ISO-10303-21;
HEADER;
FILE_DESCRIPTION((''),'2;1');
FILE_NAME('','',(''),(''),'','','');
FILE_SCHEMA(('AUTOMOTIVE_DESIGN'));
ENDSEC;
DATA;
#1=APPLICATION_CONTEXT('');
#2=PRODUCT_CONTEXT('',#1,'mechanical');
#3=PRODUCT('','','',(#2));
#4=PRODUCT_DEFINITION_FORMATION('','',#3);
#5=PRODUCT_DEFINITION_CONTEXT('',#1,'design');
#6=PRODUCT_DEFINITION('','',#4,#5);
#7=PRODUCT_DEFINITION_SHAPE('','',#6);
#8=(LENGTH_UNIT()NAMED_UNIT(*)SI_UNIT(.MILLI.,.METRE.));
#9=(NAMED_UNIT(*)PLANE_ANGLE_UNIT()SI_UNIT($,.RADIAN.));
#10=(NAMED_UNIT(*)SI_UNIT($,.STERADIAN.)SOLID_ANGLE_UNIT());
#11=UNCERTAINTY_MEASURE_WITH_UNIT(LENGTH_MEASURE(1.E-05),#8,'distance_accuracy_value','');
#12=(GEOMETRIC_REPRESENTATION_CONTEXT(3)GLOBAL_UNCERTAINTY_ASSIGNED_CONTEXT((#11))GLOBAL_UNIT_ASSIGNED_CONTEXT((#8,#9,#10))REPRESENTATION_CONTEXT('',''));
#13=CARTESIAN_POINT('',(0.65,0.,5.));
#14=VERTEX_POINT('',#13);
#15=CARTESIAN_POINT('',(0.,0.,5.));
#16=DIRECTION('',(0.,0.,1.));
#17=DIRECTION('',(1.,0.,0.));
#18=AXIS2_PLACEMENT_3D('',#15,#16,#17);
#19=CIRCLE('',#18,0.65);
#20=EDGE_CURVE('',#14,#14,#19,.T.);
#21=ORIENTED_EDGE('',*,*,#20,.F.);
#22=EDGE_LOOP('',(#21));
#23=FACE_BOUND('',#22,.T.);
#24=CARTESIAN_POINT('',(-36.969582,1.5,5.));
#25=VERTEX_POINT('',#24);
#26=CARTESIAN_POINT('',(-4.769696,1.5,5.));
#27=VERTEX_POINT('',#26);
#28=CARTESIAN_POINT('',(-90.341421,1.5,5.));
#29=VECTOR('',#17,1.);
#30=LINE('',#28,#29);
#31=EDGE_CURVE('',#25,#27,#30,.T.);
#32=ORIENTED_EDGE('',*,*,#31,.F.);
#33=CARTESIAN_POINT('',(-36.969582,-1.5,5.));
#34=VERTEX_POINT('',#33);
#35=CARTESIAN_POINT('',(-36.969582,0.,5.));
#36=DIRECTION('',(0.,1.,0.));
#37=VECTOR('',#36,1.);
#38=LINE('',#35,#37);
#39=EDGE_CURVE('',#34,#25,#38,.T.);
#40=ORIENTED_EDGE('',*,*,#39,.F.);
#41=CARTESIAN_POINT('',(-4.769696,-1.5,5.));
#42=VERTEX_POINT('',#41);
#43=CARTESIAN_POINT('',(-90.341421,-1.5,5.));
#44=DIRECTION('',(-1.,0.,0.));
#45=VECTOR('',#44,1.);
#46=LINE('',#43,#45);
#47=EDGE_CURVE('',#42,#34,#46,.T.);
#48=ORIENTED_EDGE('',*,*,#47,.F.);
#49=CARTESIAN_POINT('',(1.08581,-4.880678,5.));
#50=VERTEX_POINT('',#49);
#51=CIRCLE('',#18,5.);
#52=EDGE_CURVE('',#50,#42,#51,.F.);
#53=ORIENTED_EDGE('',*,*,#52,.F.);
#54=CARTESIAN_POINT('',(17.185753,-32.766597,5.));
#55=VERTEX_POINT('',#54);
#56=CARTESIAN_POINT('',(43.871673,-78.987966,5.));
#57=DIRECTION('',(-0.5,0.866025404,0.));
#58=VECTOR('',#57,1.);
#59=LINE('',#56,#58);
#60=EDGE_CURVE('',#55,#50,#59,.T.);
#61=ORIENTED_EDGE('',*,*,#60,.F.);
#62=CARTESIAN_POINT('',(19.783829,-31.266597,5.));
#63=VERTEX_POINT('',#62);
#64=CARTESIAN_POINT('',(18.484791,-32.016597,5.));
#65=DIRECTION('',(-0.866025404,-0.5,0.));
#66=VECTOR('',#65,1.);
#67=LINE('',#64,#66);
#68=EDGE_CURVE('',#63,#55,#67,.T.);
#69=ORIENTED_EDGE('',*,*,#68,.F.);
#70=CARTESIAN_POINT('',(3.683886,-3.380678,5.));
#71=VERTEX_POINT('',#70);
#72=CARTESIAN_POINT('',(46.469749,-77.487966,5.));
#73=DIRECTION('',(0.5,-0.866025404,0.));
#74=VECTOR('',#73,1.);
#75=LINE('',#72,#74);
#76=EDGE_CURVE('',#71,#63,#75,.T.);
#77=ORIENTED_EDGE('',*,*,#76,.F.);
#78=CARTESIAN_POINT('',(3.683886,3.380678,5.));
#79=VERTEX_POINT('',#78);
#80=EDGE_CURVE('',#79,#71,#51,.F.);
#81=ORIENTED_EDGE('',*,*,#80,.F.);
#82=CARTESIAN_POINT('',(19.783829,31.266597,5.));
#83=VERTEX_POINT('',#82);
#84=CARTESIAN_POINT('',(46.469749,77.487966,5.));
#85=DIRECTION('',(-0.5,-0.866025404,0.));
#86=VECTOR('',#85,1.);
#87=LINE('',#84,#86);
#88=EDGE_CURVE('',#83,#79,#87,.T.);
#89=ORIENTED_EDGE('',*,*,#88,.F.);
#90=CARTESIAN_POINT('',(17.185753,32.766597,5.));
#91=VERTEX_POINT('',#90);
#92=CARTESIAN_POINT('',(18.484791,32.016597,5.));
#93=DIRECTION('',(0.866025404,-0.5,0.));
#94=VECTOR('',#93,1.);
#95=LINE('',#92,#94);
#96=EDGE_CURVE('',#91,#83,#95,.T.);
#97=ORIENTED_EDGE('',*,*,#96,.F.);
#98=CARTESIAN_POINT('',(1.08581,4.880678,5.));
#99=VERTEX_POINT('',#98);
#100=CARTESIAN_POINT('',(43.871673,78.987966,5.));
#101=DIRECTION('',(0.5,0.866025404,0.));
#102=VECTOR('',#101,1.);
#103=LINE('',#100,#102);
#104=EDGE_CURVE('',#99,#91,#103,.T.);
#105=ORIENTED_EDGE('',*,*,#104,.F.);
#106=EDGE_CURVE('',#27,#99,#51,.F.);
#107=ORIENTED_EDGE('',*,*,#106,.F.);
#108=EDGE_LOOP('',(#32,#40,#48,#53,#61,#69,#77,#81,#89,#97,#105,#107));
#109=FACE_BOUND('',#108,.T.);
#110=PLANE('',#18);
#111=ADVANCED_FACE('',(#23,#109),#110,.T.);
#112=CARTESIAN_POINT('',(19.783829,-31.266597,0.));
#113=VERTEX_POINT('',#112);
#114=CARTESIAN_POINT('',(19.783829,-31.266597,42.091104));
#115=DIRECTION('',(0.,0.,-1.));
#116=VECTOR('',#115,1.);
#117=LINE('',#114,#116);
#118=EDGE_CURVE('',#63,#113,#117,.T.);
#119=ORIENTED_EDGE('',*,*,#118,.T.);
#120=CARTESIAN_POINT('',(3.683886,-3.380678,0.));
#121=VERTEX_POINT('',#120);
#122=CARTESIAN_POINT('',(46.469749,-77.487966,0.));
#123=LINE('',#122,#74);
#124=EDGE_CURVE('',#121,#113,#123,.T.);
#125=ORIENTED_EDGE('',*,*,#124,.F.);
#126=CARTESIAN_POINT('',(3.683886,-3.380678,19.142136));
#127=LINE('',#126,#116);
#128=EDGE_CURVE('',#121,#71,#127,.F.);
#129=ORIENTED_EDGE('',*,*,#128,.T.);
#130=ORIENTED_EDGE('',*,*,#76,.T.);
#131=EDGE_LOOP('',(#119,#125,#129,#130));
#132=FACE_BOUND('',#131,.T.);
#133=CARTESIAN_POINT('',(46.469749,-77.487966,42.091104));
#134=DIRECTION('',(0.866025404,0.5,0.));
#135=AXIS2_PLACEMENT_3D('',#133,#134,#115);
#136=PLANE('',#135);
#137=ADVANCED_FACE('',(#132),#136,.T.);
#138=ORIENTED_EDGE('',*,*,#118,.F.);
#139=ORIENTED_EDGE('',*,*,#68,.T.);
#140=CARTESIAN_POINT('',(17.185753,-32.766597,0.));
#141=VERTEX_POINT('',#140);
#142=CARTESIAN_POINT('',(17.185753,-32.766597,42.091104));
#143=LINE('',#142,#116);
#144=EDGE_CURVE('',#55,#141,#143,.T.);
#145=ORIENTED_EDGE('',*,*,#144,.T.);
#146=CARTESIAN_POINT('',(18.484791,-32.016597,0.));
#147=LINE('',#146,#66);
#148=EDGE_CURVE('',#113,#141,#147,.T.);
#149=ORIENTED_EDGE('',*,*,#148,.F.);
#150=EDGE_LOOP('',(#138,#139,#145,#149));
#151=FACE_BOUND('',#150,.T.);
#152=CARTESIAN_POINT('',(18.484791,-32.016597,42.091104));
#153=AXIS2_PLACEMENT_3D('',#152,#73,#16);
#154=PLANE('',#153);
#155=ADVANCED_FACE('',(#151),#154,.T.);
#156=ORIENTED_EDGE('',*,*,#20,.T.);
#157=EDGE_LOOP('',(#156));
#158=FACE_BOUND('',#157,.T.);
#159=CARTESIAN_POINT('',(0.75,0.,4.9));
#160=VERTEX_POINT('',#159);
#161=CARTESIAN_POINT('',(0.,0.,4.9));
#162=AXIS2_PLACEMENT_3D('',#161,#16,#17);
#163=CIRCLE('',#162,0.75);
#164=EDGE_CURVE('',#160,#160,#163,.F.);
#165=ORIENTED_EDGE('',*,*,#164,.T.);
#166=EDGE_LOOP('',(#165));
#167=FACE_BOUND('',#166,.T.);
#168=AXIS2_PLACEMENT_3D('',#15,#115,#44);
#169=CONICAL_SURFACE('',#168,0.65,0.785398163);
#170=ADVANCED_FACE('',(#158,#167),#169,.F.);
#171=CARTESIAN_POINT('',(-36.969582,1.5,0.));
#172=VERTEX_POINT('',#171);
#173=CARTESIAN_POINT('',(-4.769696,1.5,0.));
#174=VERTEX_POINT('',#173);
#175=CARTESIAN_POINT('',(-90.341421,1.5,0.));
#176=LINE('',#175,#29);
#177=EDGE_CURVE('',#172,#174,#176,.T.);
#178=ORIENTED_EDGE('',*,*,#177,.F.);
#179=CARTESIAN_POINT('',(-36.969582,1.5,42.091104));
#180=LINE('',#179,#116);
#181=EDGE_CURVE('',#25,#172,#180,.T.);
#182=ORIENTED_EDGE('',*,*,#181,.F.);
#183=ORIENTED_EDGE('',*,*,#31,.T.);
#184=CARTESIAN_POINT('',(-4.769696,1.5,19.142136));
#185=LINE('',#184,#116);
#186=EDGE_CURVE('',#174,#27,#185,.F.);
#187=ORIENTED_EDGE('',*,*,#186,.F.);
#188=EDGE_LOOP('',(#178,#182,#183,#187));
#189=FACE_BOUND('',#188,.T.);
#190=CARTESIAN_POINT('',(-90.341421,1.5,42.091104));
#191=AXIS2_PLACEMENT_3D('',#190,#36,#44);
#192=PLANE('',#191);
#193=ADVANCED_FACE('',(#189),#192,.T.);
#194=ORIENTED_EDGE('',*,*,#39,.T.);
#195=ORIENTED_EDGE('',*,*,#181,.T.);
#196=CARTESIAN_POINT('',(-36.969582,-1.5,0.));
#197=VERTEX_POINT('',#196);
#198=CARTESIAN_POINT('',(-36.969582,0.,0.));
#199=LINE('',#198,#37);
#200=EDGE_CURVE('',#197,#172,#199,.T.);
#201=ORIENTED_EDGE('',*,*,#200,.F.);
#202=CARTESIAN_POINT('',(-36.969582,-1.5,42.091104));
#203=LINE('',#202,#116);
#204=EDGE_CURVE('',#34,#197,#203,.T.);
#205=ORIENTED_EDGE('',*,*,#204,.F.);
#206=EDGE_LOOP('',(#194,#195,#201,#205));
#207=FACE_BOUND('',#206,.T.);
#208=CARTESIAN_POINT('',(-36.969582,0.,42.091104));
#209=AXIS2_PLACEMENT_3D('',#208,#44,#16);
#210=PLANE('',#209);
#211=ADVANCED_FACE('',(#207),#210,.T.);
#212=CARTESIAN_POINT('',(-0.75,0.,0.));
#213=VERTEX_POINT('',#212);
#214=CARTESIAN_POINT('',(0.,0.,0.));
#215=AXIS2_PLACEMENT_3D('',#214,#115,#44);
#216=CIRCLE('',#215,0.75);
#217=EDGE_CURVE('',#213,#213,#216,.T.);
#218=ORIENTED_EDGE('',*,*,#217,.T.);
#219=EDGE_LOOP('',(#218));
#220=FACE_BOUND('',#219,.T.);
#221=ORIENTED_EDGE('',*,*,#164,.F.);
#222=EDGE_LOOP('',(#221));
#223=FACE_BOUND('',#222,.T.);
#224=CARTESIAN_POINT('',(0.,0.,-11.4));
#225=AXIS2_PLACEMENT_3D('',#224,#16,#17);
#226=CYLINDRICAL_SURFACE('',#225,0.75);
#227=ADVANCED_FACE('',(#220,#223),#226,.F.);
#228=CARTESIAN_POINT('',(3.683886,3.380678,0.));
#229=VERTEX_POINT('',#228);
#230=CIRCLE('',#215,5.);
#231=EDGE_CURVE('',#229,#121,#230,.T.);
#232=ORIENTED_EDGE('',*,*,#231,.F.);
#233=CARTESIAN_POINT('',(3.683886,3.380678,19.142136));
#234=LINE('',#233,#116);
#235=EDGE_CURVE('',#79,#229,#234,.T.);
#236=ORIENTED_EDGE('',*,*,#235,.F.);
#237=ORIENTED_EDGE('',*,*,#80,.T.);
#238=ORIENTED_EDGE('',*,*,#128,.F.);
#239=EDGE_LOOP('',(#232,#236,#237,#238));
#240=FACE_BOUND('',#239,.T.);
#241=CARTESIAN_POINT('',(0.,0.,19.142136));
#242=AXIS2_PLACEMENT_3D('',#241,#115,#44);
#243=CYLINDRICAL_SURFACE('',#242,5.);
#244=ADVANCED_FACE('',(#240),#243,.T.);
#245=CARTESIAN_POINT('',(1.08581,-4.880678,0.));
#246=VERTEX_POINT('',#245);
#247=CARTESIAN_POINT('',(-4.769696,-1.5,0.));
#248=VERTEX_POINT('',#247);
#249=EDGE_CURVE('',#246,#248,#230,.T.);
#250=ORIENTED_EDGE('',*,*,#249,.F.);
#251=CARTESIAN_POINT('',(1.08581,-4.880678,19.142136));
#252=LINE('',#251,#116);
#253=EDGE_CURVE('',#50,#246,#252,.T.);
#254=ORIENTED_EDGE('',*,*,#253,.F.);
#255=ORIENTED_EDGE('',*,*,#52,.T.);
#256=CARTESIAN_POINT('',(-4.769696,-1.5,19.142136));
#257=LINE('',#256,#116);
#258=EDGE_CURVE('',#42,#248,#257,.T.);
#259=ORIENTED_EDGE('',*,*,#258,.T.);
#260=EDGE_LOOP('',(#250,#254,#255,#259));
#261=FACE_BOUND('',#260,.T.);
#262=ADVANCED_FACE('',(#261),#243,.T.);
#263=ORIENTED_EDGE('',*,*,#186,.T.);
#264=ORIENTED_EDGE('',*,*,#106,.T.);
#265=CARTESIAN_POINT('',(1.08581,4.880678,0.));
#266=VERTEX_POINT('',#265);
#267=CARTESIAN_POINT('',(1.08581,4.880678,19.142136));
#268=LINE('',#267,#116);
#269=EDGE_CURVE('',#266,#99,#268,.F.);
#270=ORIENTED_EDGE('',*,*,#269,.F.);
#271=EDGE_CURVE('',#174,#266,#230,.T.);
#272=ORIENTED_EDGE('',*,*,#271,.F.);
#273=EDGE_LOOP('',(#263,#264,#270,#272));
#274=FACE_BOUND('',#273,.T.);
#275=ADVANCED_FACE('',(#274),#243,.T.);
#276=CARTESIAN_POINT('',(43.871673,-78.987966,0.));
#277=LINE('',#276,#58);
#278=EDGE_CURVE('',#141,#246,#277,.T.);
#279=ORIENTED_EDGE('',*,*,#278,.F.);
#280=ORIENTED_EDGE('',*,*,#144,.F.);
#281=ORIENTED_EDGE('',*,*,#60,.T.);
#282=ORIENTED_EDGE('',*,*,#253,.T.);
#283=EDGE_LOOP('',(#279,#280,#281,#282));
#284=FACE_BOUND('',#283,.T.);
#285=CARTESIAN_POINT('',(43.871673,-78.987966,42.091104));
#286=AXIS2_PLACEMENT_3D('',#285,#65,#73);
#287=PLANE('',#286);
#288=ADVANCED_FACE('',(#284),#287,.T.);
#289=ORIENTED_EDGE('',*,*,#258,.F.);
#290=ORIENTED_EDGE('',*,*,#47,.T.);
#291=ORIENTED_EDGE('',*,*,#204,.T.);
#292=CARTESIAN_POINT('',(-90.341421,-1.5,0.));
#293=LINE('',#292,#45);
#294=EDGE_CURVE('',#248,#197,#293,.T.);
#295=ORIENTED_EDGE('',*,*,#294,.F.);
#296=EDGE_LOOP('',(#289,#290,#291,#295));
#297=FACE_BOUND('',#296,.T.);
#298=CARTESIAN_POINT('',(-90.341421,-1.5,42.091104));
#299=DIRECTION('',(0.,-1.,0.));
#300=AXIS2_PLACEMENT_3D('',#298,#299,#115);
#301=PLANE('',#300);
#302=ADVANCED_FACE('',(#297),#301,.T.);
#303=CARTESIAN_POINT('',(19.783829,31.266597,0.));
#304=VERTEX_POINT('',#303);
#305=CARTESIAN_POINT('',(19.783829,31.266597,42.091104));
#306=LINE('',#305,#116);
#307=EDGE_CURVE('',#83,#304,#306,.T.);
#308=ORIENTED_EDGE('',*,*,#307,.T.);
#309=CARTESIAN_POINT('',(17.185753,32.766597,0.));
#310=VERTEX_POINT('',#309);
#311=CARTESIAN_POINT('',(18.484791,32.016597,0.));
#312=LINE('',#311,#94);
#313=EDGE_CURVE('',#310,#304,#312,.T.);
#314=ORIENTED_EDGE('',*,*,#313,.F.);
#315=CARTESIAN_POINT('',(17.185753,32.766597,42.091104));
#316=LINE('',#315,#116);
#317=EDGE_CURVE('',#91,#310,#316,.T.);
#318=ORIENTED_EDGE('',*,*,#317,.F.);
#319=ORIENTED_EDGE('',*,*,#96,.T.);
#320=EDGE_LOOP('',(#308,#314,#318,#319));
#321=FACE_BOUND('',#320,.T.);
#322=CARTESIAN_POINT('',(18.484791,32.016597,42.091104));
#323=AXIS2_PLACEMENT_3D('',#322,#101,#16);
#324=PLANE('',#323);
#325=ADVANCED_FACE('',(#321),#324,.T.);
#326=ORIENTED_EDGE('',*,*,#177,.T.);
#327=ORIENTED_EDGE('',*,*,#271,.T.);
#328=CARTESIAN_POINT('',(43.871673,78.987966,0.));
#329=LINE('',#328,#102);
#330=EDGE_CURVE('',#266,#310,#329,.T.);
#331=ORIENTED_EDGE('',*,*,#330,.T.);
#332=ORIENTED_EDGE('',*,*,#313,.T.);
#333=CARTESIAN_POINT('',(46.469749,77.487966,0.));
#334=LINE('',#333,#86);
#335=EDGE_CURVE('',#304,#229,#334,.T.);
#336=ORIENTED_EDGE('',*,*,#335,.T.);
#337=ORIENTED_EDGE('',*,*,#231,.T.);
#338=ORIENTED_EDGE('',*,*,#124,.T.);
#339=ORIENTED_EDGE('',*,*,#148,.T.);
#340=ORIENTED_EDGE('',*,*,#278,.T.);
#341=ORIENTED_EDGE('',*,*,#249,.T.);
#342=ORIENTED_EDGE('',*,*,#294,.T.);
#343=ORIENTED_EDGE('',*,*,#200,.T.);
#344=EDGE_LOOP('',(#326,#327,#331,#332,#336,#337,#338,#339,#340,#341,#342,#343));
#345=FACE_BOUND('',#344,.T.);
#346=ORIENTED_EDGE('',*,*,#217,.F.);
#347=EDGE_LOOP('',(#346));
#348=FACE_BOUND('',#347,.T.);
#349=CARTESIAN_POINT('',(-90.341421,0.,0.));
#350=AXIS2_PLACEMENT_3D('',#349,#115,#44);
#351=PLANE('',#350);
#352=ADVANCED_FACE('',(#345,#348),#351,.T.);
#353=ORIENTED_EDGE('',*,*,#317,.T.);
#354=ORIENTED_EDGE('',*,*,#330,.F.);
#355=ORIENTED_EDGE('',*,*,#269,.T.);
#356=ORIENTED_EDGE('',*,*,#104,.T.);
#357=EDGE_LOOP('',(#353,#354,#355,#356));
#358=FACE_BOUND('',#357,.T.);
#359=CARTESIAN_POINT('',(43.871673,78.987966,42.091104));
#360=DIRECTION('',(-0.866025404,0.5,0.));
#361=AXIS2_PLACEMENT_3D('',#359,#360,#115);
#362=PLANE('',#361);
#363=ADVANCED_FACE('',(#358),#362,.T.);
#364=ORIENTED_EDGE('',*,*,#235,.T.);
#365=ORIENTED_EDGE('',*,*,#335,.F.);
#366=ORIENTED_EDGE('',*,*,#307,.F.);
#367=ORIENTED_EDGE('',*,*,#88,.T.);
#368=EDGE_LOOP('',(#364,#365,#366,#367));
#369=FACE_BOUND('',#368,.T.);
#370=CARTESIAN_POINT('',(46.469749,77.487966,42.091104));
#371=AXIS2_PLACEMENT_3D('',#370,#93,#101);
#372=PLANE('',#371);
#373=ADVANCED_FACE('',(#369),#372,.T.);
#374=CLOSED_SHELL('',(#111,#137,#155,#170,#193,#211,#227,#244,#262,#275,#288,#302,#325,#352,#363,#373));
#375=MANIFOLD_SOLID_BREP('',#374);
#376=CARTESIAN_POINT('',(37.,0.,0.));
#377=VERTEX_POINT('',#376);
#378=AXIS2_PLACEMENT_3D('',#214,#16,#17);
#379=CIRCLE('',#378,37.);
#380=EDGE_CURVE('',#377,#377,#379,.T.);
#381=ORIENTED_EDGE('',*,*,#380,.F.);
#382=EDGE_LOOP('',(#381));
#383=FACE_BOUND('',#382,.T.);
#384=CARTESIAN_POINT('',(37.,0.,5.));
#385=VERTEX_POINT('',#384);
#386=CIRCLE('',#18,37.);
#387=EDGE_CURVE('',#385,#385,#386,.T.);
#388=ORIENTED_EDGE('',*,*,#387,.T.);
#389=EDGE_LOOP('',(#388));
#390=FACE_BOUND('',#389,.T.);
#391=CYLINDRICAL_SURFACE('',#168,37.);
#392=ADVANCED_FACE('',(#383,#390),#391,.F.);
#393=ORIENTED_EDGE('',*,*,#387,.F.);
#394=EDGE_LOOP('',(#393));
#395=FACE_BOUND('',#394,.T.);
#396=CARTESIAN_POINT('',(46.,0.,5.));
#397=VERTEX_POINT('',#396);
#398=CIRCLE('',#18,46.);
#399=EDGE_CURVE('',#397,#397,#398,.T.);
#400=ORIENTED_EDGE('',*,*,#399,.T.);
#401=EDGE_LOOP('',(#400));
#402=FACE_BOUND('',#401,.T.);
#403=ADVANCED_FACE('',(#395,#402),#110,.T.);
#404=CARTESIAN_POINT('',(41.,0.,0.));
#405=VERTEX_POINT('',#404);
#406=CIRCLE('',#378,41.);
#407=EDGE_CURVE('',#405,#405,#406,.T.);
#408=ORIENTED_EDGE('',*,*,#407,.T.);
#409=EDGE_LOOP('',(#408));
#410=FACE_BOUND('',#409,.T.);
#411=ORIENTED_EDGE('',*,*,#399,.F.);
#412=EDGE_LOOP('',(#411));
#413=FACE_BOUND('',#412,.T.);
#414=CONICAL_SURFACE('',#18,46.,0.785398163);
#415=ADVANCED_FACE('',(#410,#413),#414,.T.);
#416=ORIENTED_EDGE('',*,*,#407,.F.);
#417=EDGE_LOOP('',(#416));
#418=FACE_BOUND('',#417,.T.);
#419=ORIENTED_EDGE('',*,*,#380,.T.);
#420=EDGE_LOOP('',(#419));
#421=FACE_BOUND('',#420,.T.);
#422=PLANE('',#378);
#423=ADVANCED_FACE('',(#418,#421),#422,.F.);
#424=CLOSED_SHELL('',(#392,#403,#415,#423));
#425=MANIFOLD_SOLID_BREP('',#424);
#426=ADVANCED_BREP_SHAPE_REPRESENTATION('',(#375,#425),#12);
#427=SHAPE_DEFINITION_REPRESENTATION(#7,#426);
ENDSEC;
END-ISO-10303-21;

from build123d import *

# Parameters (mm, degrees)
SKETCH1_R           = 46
SKETCH1_R_2         = 37
BOSS_EXTRUDE1_DEPTH = 5
SKETCH7_W           = 36.969582091
SKETCH7_H           = 1.5
BOSS_EXTRUDE4_DEPTH = 5
CIRPATTERN4_COUNT   = 3
SKETCH8_R           = 5
BOSS_EXTRUDE5_DEPTH = 5


# Read off the part's stored shape, not the designer's step: Cavity1
with BuildPart() as part:
    # Sketch1 → Boss-Extrude1 (new body)
    with BuildSketch(Plane.XY):
        Circle(SKETCH1_R)
        Circle(SKETCH1_R_2, mode=Mode.SUBTRACT)
    extrude(amount=BOSS_EXTRUDE1_DEPTH)

    # Sketch6 → Cut-Revolve2 (revolve, cut)
    with BuildSketch(Plane(origin=(0, 0, 0), x_dir=(1, 0, 0), z_dir=(0, 1, 0)), mode=Mode.PRIVATE) as cut_revolve2_sk:
        Polygon((-46, 0), (-41, 0), (-46, -5), align=None)
    revolve(cut_revolve2_sk.sketch.rotate(Axis((0, 0, 0), (0, 0, -1)), 180), axis=Axis((0, 0, 0), (0, 0, -1)), mode=Mode.SUBTRACT)


with BuildPart() as body_2:
    # Sketch7 → Boss-Extrude4 (new body)
    with BuildSketch(Plane(origin=(0, 0, 0), x_dir=(-1, 0, 0), z_dir=(0, 0, -1))):
        with Locations((18.484791045, 0.75)):
            Rectangle(SKETCH7_W, SKETCH7_H)
        with Locations((18.484791045, -0.75)):
            Rectangle(SKETCH7_W, SKETCH7_H)
    extrude(amount=-BOSS_EXTRUDE4_DEPTH)


with BuildPart() as cirpattern4_1:
    # CirPattern4: pattern copy
    add(body_2.part.rotate(Axis((0, 0, 0), (0, 0, 1)), 1 * 360 / CIRPATTERN4_COUNT))


with BuildPart() as cirpattern4_2:
    # CirPattern4: pattern copy
    add(body_2.part.rotate(Axis((0, 0, 0), (0, 0, 1)), 2 * 360 / CIRPATTERN4_COUNT))


with BuildPart() as body_2_1:
    add(body_2.part)

    add(cirpattern4_1.part)  # Boss-Extrude5 merges CirPattern4_1

    add(cirpattern4_2.part)  # Boss-Extrude5 merges CirPattern4_2
    # Sketch8 → Boss-Extrude5 (add)
    with BuildSketch(Plane(origin=(0, 0, 0), x_dir=(-1, 0, 0), z_dir=(0, 0, -1))):
        Circle(SKETCH8_R)
    extrude(amount=-BOSS_EXTRUDE5_DEPTH)

    # Cavity1 outline → Cavity1 (revolve, cut)
    with BuildSketch(Plane.XZ):
        Polygon((0.75, 0), (0.75, 4.9), (0.65, 5), (0, 5), (0, 0), align=None)
    revolve(axis=Axis((0, 0, 0), (0, 0, 1)), mode=Mode.SUBTRACT)


solid = Compound([part.part, body_2_1.part])
